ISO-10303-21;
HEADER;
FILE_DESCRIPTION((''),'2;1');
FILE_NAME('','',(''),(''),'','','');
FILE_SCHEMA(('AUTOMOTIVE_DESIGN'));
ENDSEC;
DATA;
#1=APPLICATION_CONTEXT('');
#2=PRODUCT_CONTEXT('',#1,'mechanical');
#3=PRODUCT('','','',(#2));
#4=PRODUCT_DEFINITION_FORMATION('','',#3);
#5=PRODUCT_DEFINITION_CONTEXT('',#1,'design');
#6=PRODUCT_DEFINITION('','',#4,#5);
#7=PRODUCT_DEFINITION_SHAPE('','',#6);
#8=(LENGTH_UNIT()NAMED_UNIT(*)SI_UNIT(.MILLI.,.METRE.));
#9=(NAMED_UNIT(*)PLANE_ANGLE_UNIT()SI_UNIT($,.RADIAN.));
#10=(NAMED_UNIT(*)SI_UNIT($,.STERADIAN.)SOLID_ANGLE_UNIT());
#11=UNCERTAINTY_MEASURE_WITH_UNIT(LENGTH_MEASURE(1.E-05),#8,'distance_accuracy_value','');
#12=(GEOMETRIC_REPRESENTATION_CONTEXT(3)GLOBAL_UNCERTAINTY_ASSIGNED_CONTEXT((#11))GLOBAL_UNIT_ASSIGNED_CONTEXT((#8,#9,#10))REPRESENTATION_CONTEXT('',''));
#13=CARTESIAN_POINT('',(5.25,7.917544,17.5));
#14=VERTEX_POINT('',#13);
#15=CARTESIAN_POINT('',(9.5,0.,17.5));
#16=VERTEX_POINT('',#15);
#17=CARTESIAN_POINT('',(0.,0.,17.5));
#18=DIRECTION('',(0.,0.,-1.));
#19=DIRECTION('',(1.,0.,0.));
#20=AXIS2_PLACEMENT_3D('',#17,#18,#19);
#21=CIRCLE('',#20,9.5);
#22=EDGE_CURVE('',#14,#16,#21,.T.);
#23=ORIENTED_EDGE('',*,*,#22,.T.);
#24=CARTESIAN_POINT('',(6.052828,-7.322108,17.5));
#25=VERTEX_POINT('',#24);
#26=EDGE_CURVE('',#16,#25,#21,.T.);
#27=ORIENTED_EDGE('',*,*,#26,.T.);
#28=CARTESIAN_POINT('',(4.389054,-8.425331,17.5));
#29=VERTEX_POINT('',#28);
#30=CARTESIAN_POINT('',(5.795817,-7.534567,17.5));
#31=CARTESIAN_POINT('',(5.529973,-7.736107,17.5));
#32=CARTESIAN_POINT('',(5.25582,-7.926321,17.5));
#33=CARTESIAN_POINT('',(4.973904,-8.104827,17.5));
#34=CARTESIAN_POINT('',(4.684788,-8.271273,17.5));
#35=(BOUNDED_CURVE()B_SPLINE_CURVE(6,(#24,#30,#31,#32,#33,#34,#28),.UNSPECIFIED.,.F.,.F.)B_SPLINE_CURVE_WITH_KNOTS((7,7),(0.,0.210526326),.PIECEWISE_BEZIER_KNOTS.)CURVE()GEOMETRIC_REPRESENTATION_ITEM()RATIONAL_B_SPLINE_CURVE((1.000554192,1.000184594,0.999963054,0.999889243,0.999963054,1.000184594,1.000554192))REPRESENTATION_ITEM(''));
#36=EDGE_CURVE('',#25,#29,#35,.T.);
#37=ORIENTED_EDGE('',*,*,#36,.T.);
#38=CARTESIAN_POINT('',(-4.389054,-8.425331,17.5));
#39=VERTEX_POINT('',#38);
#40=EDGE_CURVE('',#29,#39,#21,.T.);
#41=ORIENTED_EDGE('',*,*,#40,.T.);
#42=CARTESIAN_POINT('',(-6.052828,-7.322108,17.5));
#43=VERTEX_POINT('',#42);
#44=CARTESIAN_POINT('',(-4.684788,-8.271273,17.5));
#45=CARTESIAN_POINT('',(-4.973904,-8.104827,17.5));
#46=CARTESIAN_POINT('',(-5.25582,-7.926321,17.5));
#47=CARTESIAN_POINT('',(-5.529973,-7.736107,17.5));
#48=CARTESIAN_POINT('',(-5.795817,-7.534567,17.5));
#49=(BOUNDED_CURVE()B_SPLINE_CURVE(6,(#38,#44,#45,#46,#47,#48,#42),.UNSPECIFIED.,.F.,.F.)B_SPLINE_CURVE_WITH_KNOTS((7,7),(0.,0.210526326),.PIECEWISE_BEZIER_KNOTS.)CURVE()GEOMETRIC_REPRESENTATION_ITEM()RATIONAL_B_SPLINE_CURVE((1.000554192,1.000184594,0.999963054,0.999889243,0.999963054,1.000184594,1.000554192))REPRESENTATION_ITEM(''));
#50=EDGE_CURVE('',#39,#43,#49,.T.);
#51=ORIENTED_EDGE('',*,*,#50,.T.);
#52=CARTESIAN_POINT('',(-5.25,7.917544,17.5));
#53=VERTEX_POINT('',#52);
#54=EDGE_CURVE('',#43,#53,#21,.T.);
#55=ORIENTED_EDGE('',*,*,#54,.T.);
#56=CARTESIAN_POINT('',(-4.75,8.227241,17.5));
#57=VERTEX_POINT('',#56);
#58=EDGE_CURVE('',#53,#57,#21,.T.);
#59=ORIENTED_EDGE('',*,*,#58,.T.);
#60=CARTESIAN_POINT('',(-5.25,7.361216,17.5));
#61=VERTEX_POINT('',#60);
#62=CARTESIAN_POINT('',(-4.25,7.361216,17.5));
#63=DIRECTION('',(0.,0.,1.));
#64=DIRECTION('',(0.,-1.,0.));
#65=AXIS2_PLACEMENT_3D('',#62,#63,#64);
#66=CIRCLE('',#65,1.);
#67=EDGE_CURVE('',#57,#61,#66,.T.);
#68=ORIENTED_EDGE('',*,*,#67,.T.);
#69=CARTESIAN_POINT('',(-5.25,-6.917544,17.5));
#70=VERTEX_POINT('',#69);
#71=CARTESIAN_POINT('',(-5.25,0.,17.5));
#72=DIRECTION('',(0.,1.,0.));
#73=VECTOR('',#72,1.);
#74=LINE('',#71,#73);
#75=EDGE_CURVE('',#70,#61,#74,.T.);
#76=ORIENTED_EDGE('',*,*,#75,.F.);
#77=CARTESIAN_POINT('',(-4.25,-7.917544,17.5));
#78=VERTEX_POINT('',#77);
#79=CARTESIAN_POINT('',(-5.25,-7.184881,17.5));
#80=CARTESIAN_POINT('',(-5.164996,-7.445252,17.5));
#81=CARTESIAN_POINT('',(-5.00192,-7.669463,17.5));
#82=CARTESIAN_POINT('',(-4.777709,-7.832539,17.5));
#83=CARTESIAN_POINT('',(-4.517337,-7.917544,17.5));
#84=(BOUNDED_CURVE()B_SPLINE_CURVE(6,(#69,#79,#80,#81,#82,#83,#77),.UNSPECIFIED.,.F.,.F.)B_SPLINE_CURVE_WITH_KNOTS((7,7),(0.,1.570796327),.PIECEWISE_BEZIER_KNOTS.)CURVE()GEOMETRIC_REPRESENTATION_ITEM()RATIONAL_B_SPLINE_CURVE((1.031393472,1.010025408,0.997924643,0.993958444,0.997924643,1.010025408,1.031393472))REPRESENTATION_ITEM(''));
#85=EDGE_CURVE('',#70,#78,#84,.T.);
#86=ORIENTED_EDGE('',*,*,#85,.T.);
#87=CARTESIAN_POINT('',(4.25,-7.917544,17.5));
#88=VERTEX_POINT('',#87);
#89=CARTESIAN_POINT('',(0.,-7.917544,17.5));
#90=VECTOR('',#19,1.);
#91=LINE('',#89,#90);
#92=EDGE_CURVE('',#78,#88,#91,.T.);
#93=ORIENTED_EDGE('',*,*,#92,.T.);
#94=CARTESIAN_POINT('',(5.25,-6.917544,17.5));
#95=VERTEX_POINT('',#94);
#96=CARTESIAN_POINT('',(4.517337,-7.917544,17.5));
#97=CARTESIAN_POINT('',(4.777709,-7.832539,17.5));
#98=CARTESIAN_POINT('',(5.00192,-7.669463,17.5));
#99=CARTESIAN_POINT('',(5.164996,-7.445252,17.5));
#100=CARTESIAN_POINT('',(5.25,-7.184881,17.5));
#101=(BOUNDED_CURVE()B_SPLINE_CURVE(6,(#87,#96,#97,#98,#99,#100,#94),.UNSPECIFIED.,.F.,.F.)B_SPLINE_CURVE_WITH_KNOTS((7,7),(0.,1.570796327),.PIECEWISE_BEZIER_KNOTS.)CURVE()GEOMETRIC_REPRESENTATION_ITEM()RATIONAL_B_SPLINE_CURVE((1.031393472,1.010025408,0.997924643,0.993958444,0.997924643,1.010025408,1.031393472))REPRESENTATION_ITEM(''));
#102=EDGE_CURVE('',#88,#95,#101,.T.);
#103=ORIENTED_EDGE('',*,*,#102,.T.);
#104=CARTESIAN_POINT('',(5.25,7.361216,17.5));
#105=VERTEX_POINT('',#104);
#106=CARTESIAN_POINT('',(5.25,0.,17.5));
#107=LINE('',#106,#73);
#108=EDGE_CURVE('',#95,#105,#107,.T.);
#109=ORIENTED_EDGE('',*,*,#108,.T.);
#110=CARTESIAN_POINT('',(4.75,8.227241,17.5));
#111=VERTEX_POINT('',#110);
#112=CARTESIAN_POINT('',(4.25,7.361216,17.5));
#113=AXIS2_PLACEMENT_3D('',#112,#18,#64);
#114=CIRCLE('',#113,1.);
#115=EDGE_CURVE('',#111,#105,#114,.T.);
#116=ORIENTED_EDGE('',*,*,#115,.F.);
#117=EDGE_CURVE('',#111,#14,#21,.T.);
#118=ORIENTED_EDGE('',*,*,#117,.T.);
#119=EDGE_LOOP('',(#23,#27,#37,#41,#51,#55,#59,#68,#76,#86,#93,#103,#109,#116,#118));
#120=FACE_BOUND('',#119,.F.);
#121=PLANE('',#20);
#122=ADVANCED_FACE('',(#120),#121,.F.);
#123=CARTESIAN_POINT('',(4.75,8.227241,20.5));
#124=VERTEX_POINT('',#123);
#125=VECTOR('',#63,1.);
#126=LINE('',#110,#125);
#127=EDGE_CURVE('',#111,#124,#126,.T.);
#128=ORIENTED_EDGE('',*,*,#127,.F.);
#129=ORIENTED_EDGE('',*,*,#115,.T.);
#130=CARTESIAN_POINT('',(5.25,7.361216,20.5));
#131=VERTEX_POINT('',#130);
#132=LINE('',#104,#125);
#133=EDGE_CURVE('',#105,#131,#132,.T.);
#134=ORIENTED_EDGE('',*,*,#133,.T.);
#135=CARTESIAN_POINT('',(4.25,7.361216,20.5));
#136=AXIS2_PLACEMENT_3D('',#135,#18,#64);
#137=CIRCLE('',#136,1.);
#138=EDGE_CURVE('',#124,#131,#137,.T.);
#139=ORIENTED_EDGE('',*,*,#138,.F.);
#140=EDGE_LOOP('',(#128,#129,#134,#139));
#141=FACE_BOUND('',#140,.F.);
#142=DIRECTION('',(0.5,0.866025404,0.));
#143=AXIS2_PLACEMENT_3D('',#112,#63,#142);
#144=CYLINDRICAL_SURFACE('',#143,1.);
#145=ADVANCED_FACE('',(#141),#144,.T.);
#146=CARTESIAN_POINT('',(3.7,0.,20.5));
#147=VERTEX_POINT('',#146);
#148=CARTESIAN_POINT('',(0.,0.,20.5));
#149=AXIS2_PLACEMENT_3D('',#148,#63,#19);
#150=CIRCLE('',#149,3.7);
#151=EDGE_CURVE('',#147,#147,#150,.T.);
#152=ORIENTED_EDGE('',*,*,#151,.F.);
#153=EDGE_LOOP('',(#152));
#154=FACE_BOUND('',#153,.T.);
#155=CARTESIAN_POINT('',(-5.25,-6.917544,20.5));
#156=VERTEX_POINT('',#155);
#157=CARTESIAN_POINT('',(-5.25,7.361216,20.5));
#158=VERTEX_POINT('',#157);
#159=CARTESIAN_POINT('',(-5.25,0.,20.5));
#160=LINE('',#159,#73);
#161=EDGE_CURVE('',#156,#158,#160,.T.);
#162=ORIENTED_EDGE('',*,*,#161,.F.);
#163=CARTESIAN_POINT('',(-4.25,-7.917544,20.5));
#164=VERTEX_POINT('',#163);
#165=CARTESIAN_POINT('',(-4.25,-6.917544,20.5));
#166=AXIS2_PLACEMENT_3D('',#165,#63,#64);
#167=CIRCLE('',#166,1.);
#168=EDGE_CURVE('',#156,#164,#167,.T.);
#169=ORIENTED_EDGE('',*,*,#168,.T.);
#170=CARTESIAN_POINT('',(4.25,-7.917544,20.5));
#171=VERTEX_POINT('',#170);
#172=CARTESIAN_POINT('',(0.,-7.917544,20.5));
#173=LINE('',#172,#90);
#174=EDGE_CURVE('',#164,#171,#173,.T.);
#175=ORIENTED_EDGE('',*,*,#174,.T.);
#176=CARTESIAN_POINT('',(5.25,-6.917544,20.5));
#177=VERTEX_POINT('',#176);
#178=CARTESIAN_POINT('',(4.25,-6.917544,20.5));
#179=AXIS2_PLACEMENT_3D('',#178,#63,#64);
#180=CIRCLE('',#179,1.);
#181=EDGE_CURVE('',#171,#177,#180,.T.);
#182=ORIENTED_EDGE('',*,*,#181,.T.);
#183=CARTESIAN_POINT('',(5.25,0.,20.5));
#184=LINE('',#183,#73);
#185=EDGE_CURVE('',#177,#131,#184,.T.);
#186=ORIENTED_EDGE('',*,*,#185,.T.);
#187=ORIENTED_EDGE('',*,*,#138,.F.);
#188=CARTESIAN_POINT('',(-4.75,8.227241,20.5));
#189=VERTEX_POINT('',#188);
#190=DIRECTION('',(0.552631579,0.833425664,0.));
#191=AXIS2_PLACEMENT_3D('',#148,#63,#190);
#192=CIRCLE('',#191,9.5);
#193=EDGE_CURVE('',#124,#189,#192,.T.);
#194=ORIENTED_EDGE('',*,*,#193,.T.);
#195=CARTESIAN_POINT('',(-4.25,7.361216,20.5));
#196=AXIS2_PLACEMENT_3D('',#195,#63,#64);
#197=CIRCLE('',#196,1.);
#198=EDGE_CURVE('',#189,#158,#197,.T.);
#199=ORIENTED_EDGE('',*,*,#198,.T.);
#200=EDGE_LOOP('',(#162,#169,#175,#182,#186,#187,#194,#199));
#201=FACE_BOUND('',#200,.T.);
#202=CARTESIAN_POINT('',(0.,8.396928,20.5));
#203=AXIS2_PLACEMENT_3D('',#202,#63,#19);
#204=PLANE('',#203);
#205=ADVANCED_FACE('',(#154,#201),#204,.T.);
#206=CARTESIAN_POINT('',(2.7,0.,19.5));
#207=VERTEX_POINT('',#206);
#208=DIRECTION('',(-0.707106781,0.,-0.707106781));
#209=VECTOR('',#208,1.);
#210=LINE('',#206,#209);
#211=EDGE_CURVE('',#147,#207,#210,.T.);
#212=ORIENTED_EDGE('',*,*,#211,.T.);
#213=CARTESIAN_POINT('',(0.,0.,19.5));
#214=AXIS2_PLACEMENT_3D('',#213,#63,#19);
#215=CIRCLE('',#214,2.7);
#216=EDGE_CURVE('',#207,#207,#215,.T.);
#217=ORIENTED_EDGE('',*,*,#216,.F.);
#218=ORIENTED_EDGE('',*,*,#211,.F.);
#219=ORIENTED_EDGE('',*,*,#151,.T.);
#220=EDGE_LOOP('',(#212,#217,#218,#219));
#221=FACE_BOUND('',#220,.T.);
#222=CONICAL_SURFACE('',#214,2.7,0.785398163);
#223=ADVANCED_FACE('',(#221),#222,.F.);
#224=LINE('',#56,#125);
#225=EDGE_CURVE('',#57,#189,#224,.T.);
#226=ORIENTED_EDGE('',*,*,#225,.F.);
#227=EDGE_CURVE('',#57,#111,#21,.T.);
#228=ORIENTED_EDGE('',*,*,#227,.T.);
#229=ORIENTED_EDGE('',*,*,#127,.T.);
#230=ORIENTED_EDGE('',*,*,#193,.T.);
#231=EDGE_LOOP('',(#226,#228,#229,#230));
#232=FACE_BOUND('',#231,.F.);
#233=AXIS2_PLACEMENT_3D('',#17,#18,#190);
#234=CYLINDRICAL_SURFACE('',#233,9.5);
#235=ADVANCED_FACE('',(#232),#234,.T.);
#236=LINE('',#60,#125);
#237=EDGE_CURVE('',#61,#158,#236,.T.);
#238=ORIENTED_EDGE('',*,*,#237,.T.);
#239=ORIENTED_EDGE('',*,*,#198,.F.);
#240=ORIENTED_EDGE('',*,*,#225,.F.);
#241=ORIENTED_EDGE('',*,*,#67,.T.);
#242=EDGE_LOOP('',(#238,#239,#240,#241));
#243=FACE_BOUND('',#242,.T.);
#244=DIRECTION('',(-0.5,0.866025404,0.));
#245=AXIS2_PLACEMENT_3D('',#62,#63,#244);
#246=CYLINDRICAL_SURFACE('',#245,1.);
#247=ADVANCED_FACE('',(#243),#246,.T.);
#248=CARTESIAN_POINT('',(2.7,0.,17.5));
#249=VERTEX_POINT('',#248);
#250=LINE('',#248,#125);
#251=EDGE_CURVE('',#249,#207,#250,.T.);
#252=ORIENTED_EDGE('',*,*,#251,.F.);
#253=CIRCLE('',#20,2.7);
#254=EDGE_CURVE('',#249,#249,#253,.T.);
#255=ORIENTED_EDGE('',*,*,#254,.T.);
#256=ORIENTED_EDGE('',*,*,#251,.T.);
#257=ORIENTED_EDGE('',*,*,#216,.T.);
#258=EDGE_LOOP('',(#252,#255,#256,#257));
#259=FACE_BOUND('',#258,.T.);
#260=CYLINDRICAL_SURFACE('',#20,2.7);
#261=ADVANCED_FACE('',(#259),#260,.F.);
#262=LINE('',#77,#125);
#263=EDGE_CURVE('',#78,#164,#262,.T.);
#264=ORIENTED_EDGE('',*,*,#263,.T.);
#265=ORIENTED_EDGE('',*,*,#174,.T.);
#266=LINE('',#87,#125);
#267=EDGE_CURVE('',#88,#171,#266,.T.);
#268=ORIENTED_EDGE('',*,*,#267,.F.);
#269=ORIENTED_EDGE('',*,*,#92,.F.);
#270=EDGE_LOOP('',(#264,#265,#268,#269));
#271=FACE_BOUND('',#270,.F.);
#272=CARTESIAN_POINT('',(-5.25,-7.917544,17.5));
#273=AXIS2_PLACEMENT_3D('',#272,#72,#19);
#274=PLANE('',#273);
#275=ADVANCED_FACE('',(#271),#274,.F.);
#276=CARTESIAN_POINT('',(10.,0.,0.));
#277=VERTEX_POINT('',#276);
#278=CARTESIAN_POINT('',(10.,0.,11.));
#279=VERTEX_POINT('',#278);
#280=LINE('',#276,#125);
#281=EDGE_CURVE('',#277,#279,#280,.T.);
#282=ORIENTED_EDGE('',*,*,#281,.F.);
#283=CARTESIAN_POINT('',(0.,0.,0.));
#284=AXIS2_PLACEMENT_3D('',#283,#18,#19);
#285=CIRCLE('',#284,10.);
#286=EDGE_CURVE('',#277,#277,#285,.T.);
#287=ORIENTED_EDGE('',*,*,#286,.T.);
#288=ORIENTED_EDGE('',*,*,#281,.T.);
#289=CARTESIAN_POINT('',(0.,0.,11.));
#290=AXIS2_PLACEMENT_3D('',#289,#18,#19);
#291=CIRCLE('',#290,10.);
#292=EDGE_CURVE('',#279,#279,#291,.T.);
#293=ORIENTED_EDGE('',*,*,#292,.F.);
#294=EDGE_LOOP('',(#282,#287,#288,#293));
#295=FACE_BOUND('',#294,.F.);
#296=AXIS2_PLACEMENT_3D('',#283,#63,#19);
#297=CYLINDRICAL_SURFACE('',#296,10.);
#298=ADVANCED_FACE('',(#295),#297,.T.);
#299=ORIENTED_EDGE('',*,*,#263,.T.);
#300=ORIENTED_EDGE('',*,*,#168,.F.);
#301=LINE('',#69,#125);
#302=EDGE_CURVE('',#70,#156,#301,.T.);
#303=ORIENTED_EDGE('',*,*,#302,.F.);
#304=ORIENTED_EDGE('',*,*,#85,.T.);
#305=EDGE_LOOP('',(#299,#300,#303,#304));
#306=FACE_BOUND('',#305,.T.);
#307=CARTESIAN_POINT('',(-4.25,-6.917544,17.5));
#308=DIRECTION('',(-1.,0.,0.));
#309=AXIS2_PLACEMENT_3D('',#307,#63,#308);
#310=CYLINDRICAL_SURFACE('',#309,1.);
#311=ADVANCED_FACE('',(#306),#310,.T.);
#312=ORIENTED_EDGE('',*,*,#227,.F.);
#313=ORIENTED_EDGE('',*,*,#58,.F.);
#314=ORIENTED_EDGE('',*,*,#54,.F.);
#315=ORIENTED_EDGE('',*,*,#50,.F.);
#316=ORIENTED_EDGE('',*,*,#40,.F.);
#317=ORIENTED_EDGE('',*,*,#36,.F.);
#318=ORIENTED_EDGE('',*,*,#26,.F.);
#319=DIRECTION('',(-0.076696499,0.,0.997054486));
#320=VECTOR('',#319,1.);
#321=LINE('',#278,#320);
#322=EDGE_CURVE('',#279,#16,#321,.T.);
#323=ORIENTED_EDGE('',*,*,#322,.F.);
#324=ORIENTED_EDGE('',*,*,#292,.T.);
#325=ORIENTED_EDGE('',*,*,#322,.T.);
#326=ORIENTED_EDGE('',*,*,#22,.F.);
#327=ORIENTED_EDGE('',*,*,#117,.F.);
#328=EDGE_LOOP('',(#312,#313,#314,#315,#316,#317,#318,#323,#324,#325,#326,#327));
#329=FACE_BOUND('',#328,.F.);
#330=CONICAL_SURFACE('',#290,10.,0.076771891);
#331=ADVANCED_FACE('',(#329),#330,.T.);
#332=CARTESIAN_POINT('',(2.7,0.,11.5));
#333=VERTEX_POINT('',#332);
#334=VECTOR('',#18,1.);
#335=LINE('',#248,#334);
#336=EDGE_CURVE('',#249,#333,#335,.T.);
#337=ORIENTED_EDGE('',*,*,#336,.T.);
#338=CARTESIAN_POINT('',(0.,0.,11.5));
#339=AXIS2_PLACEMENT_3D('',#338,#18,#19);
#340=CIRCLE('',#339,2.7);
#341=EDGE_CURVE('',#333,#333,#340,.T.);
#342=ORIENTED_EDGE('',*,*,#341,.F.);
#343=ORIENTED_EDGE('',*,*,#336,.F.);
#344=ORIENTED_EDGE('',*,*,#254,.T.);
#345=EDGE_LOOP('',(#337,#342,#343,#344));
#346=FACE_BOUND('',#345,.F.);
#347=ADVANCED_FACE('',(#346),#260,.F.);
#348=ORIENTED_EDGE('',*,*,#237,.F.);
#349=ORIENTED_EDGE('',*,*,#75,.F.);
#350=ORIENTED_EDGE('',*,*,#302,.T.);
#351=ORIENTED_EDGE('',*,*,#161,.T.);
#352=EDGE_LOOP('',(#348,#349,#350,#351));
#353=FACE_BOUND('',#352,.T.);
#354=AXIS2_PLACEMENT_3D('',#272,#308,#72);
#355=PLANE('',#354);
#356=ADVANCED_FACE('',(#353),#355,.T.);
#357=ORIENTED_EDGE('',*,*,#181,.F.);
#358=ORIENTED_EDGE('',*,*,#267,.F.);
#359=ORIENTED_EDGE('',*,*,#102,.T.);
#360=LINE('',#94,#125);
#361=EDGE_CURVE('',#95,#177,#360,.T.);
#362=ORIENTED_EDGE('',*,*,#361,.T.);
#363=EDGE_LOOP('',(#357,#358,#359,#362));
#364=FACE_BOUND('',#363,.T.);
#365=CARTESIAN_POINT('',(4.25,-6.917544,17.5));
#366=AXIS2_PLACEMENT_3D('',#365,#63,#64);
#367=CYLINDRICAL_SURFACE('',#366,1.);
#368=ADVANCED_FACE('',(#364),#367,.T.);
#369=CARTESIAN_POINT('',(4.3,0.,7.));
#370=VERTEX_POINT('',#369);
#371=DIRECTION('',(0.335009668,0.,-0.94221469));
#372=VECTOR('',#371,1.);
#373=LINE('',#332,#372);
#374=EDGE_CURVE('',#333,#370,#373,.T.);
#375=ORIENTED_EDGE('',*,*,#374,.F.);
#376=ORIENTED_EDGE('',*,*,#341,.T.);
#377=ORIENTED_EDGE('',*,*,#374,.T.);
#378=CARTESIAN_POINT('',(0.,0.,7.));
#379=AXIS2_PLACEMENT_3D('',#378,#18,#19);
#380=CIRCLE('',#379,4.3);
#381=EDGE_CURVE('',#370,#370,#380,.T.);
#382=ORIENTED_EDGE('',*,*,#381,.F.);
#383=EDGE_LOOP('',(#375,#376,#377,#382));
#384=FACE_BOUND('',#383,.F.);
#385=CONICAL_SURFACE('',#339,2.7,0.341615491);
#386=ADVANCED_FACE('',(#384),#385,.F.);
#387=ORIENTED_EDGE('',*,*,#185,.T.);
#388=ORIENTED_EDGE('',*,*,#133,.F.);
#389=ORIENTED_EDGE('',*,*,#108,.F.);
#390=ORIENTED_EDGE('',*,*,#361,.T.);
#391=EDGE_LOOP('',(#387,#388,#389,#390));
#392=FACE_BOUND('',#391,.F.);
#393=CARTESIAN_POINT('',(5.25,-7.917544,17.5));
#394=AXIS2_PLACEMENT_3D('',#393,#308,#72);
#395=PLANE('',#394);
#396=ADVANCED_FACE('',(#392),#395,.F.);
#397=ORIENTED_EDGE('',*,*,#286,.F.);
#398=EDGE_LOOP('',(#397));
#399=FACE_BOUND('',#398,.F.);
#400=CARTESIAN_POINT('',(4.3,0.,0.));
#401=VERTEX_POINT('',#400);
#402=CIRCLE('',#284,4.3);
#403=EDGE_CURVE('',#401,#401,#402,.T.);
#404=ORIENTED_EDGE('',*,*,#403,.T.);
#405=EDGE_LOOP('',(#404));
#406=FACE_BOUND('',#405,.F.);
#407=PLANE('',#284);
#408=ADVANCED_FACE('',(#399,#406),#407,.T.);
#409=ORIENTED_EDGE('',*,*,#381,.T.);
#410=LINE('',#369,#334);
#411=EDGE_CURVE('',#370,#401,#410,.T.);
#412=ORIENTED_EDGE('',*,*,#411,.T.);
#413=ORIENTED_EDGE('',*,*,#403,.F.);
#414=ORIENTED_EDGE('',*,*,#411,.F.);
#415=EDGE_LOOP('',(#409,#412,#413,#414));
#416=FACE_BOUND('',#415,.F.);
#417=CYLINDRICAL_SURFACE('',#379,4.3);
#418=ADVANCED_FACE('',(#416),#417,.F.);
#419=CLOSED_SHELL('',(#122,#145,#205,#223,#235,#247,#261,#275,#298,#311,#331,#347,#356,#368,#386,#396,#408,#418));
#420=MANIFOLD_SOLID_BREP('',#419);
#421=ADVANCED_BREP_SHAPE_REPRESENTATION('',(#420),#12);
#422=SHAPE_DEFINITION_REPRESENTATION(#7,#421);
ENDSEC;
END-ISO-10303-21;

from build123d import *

# Parameters (mm, degrees)
F3_W     = 10.5
F3_H     = 15.8350876221
F3_R     = 2.7
F4_DEPTH = 3
F5_R     = 1
F7_DEPTH = 3
F8_R     = 1
F9_SIZE  = 1


with BuildPart() as f2:
    # F0 (on Front) → F2 (revolve)
    with BuildSketch(Plane.XZ):
        Polygon((4.3, 7), (4.3, 0), (10, 0), (10, 11), (9.5, 17.5), (2.7, 17.5), (2.7, 11.5), align=None)
    revolve(axis=Axis((0, 0, 12.8003526479), (0, 0, -1)))

    # F3 (on face) → F4 (join)
    with BuildSketch(Plane.XY.offset(17.5)):
        Rectangle(F3_W, F3_H)
        Circle(F3_R, mode=Mode.SUBTRACT)
    extrude(amount=F4_DEPTH)

    # F5
    f5_edges = [f2.edges().sort_by_distance(p)[0] for p in [
        (-5.25, -7.917544, 19),
        (5.25, -7.917544, 19),
    ]]
    fillet(f5_edges, radius=F5_R)

    # F6 (on face) → F7 (join)
    with BuildSketch(Plane.XY.offset(17.5)):
        with BuildLine():
            Line((-5.25, 7.9175438111), (5.25, 7.9175438111))
            ThreePointArc((5.25, 7.9175438111), (0, 9.5), (-5.25, 7.9175438111))
        make_face()
    extrude(amount=F7_DEPTH)

    # F8
    f8_edges = [f2.edges().sort_by_distance(p)[0] for p in [
        (5.25, 7.917544, 19),
        (-5.25, 7.917544, 19),
    ]]
    fillet(f8_edges, radius=F8_R)

    # F9
    f9_edges = [f2.edges().sort_by_distance(p)[0] for p in [
        (-2.7, 0, 20.5),
        (2.7, 0, 19),
    ]]
    chamfer(f9_edges, length=F9_SIZE)


solid = f2.part
